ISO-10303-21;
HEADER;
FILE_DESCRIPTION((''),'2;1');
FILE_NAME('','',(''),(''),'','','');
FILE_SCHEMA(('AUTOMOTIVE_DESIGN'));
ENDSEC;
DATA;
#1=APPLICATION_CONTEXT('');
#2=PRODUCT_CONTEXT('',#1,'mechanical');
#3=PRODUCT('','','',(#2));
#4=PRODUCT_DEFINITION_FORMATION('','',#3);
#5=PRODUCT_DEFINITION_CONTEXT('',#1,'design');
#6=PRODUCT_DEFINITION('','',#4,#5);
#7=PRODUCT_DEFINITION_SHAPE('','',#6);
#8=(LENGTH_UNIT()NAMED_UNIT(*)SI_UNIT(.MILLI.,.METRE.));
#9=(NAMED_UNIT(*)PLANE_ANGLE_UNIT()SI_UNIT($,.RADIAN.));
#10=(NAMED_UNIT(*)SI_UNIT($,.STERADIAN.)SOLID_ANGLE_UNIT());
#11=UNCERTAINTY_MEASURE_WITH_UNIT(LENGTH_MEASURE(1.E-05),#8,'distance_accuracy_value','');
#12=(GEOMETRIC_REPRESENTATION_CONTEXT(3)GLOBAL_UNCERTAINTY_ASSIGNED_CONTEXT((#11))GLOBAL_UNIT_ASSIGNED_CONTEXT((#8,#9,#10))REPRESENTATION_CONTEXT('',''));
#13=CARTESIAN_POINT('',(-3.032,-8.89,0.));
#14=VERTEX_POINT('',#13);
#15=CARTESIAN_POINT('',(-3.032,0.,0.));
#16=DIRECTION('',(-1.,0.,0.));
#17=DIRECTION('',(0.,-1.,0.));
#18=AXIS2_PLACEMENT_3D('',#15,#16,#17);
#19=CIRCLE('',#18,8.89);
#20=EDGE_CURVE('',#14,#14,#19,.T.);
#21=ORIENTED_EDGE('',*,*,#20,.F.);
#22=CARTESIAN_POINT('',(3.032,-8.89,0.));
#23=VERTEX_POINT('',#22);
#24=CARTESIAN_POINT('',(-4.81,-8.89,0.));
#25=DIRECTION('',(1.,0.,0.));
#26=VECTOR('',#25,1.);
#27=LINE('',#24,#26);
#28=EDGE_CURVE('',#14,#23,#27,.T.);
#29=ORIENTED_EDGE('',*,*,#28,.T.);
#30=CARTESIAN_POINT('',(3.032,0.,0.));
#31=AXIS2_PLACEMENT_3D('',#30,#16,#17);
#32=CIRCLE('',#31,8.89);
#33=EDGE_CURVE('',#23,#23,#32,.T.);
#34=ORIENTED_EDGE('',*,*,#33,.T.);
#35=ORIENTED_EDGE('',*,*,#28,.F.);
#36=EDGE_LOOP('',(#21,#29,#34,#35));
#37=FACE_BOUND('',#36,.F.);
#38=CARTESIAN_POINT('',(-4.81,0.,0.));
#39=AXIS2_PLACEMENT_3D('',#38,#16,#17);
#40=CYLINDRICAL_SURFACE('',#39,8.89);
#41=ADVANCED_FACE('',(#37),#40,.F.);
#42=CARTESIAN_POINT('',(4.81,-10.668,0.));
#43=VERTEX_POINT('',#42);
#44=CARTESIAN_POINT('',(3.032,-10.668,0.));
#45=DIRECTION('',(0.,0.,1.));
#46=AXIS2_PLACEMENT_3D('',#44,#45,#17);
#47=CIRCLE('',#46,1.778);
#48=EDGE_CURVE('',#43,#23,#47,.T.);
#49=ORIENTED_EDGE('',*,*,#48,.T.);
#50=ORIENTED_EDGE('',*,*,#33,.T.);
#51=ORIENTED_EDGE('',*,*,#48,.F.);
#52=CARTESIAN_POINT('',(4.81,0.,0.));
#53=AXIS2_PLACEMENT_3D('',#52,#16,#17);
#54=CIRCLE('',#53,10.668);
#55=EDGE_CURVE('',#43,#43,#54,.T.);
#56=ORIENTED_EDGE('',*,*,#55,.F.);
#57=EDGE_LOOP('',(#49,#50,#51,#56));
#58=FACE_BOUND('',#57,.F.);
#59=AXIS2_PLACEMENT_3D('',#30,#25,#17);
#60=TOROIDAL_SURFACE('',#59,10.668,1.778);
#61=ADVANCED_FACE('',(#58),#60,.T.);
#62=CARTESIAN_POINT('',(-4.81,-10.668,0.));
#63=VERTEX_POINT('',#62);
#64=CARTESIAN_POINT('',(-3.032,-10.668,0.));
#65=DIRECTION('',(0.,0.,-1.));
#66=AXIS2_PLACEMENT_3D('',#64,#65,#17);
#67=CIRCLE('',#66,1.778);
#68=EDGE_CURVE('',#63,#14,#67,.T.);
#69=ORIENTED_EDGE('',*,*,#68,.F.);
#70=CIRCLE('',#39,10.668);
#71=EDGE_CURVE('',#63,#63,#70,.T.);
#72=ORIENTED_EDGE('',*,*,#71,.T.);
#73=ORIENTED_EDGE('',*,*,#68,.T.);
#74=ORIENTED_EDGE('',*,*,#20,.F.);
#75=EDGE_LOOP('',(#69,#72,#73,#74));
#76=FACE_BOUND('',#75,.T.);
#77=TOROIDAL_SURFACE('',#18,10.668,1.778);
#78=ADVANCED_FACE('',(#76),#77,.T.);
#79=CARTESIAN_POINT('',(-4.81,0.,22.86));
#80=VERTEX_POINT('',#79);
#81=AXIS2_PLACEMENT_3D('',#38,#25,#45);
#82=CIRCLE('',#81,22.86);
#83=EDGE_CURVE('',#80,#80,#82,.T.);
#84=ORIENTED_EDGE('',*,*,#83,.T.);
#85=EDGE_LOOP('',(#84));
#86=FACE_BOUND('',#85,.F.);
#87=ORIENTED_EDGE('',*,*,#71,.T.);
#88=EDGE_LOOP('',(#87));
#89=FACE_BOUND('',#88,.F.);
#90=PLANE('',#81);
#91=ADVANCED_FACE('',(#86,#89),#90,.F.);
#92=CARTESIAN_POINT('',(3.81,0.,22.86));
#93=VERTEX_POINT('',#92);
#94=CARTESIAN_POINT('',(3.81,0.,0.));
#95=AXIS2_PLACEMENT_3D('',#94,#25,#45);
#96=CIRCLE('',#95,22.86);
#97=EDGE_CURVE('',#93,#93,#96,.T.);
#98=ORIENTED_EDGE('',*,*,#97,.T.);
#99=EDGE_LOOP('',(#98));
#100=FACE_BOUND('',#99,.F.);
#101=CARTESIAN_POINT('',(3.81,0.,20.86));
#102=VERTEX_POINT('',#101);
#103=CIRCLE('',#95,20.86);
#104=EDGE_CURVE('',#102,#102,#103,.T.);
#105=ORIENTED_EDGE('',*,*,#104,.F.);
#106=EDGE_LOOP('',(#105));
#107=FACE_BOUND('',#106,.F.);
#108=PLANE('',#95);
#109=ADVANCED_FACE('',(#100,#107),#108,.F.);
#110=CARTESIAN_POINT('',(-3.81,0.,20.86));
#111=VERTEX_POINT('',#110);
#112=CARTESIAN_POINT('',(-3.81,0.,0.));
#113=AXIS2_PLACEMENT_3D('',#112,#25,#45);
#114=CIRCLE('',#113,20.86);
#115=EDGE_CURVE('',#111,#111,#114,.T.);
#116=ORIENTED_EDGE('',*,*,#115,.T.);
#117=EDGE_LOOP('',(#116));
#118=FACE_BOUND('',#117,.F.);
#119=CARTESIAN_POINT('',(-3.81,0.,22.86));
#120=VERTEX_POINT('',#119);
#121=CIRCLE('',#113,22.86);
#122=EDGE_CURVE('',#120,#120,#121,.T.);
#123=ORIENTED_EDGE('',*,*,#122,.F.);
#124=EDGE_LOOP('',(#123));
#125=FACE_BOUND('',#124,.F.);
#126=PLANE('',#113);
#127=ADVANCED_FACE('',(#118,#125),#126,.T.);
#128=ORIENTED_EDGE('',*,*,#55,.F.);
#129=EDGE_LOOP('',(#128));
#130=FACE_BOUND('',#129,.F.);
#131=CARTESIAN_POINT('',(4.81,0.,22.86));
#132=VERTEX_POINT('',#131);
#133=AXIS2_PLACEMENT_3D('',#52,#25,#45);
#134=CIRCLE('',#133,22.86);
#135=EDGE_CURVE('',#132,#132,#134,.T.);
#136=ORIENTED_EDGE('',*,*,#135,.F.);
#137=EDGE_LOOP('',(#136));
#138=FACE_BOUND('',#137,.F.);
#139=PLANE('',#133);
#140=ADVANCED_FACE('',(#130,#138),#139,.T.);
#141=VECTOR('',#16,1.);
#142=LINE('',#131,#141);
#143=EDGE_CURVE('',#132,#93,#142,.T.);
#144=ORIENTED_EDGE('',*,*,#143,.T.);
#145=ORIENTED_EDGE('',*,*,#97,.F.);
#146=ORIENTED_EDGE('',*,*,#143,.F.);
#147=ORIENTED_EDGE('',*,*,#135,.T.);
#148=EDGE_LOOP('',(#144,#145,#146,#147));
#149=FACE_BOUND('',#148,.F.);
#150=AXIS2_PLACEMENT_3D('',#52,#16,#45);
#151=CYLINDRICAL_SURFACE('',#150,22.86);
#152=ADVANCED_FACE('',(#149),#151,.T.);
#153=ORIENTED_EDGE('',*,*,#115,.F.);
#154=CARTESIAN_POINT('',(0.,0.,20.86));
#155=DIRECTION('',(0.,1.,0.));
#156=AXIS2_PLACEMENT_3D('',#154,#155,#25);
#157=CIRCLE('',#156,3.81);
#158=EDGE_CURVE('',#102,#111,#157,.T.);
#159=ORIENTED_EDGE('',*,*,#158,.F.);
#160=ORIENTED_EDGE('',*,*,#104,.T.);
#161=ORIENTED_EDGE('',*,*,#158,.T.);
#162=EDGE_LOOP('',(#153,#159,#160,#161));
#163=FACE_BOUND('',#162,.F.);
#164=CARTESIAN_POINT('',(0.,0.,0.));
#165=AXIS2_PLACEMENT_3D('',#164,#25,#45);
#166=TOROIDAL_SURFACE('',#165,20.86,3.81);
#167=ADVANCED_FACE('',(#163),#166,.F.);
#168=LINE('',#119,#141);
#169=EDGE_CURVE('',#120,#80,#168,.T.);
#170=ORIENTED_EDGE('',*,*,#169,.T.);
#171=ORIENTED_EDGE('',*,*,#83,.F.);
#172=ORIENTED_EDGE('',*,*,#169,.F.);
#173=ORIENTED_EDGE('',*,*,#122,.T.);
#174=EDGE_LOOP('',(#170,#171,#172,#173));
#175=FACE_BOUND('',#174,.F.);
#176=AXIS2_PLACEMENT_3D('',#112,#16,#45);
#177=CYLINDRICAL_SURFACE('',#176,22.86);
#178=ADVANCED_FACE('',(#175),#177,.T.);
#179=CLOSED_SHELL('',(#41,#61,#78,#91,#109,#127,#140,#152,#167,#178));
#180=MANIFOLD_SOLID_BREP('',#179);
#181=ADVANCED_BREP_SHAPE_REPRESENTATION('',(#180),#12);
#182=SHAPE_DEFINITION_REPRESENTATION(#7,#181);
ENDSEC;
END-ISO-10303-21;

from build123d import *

# Parameters (mm, degrees)
F3_R     = 8.89
F4_DEPTH = 25.4
F5_R     = 1.778


with BuildPart() as f2:
    # F0 (on Front) → F2 (revolve)
    with BuildSketch(Plane.XZ):
        with BuildLine():
            Line((-3.81, 0), (0, 0))
            Line((0, 0), (3.81, 0))
            Line((3.81, 0), (3.81, 20.86))
            ThreePointArc((3.81, 20.86), (0, 17.05), (-3.81, 20.86))
            Line((-3.81, 20.86), (-3.81, 0))
        make_face()
        Polygon((-4.81, 0), (-3.81, 0), (-3.81, 20.86), (-3.81, 22.86), (-4.81, 22.86), align=None)
        Polygon((3.81, 20.86), (3.81, 0), (4.81, 0), (4.81, 22.86), (3.81, 22.86), align=None)
    revolve(axis=Axis((-0.3435998224, 0, 0), (1, 0, 0)))

    # F3 (on face) → F4 (cut)
    with BuildSketch(Plane(origin=(-4.81, 0, 0), x_dir=(0, -1, 0), z_dir=(-1, 0, 0))):
        Circle(F3_R)
    extrude(amount=-F4_DEPTH, mode=Mode.SUBTRACT)

    # F5
    f5_edges = [f2.edges().sort_by_distance(p)[0] for p in [
        (4.81, 8.89, 0),
        (-4.81, 8.89, 0),
    ]]
    fillet(f5_edges, radius=F5_R)


solid = f2.part
